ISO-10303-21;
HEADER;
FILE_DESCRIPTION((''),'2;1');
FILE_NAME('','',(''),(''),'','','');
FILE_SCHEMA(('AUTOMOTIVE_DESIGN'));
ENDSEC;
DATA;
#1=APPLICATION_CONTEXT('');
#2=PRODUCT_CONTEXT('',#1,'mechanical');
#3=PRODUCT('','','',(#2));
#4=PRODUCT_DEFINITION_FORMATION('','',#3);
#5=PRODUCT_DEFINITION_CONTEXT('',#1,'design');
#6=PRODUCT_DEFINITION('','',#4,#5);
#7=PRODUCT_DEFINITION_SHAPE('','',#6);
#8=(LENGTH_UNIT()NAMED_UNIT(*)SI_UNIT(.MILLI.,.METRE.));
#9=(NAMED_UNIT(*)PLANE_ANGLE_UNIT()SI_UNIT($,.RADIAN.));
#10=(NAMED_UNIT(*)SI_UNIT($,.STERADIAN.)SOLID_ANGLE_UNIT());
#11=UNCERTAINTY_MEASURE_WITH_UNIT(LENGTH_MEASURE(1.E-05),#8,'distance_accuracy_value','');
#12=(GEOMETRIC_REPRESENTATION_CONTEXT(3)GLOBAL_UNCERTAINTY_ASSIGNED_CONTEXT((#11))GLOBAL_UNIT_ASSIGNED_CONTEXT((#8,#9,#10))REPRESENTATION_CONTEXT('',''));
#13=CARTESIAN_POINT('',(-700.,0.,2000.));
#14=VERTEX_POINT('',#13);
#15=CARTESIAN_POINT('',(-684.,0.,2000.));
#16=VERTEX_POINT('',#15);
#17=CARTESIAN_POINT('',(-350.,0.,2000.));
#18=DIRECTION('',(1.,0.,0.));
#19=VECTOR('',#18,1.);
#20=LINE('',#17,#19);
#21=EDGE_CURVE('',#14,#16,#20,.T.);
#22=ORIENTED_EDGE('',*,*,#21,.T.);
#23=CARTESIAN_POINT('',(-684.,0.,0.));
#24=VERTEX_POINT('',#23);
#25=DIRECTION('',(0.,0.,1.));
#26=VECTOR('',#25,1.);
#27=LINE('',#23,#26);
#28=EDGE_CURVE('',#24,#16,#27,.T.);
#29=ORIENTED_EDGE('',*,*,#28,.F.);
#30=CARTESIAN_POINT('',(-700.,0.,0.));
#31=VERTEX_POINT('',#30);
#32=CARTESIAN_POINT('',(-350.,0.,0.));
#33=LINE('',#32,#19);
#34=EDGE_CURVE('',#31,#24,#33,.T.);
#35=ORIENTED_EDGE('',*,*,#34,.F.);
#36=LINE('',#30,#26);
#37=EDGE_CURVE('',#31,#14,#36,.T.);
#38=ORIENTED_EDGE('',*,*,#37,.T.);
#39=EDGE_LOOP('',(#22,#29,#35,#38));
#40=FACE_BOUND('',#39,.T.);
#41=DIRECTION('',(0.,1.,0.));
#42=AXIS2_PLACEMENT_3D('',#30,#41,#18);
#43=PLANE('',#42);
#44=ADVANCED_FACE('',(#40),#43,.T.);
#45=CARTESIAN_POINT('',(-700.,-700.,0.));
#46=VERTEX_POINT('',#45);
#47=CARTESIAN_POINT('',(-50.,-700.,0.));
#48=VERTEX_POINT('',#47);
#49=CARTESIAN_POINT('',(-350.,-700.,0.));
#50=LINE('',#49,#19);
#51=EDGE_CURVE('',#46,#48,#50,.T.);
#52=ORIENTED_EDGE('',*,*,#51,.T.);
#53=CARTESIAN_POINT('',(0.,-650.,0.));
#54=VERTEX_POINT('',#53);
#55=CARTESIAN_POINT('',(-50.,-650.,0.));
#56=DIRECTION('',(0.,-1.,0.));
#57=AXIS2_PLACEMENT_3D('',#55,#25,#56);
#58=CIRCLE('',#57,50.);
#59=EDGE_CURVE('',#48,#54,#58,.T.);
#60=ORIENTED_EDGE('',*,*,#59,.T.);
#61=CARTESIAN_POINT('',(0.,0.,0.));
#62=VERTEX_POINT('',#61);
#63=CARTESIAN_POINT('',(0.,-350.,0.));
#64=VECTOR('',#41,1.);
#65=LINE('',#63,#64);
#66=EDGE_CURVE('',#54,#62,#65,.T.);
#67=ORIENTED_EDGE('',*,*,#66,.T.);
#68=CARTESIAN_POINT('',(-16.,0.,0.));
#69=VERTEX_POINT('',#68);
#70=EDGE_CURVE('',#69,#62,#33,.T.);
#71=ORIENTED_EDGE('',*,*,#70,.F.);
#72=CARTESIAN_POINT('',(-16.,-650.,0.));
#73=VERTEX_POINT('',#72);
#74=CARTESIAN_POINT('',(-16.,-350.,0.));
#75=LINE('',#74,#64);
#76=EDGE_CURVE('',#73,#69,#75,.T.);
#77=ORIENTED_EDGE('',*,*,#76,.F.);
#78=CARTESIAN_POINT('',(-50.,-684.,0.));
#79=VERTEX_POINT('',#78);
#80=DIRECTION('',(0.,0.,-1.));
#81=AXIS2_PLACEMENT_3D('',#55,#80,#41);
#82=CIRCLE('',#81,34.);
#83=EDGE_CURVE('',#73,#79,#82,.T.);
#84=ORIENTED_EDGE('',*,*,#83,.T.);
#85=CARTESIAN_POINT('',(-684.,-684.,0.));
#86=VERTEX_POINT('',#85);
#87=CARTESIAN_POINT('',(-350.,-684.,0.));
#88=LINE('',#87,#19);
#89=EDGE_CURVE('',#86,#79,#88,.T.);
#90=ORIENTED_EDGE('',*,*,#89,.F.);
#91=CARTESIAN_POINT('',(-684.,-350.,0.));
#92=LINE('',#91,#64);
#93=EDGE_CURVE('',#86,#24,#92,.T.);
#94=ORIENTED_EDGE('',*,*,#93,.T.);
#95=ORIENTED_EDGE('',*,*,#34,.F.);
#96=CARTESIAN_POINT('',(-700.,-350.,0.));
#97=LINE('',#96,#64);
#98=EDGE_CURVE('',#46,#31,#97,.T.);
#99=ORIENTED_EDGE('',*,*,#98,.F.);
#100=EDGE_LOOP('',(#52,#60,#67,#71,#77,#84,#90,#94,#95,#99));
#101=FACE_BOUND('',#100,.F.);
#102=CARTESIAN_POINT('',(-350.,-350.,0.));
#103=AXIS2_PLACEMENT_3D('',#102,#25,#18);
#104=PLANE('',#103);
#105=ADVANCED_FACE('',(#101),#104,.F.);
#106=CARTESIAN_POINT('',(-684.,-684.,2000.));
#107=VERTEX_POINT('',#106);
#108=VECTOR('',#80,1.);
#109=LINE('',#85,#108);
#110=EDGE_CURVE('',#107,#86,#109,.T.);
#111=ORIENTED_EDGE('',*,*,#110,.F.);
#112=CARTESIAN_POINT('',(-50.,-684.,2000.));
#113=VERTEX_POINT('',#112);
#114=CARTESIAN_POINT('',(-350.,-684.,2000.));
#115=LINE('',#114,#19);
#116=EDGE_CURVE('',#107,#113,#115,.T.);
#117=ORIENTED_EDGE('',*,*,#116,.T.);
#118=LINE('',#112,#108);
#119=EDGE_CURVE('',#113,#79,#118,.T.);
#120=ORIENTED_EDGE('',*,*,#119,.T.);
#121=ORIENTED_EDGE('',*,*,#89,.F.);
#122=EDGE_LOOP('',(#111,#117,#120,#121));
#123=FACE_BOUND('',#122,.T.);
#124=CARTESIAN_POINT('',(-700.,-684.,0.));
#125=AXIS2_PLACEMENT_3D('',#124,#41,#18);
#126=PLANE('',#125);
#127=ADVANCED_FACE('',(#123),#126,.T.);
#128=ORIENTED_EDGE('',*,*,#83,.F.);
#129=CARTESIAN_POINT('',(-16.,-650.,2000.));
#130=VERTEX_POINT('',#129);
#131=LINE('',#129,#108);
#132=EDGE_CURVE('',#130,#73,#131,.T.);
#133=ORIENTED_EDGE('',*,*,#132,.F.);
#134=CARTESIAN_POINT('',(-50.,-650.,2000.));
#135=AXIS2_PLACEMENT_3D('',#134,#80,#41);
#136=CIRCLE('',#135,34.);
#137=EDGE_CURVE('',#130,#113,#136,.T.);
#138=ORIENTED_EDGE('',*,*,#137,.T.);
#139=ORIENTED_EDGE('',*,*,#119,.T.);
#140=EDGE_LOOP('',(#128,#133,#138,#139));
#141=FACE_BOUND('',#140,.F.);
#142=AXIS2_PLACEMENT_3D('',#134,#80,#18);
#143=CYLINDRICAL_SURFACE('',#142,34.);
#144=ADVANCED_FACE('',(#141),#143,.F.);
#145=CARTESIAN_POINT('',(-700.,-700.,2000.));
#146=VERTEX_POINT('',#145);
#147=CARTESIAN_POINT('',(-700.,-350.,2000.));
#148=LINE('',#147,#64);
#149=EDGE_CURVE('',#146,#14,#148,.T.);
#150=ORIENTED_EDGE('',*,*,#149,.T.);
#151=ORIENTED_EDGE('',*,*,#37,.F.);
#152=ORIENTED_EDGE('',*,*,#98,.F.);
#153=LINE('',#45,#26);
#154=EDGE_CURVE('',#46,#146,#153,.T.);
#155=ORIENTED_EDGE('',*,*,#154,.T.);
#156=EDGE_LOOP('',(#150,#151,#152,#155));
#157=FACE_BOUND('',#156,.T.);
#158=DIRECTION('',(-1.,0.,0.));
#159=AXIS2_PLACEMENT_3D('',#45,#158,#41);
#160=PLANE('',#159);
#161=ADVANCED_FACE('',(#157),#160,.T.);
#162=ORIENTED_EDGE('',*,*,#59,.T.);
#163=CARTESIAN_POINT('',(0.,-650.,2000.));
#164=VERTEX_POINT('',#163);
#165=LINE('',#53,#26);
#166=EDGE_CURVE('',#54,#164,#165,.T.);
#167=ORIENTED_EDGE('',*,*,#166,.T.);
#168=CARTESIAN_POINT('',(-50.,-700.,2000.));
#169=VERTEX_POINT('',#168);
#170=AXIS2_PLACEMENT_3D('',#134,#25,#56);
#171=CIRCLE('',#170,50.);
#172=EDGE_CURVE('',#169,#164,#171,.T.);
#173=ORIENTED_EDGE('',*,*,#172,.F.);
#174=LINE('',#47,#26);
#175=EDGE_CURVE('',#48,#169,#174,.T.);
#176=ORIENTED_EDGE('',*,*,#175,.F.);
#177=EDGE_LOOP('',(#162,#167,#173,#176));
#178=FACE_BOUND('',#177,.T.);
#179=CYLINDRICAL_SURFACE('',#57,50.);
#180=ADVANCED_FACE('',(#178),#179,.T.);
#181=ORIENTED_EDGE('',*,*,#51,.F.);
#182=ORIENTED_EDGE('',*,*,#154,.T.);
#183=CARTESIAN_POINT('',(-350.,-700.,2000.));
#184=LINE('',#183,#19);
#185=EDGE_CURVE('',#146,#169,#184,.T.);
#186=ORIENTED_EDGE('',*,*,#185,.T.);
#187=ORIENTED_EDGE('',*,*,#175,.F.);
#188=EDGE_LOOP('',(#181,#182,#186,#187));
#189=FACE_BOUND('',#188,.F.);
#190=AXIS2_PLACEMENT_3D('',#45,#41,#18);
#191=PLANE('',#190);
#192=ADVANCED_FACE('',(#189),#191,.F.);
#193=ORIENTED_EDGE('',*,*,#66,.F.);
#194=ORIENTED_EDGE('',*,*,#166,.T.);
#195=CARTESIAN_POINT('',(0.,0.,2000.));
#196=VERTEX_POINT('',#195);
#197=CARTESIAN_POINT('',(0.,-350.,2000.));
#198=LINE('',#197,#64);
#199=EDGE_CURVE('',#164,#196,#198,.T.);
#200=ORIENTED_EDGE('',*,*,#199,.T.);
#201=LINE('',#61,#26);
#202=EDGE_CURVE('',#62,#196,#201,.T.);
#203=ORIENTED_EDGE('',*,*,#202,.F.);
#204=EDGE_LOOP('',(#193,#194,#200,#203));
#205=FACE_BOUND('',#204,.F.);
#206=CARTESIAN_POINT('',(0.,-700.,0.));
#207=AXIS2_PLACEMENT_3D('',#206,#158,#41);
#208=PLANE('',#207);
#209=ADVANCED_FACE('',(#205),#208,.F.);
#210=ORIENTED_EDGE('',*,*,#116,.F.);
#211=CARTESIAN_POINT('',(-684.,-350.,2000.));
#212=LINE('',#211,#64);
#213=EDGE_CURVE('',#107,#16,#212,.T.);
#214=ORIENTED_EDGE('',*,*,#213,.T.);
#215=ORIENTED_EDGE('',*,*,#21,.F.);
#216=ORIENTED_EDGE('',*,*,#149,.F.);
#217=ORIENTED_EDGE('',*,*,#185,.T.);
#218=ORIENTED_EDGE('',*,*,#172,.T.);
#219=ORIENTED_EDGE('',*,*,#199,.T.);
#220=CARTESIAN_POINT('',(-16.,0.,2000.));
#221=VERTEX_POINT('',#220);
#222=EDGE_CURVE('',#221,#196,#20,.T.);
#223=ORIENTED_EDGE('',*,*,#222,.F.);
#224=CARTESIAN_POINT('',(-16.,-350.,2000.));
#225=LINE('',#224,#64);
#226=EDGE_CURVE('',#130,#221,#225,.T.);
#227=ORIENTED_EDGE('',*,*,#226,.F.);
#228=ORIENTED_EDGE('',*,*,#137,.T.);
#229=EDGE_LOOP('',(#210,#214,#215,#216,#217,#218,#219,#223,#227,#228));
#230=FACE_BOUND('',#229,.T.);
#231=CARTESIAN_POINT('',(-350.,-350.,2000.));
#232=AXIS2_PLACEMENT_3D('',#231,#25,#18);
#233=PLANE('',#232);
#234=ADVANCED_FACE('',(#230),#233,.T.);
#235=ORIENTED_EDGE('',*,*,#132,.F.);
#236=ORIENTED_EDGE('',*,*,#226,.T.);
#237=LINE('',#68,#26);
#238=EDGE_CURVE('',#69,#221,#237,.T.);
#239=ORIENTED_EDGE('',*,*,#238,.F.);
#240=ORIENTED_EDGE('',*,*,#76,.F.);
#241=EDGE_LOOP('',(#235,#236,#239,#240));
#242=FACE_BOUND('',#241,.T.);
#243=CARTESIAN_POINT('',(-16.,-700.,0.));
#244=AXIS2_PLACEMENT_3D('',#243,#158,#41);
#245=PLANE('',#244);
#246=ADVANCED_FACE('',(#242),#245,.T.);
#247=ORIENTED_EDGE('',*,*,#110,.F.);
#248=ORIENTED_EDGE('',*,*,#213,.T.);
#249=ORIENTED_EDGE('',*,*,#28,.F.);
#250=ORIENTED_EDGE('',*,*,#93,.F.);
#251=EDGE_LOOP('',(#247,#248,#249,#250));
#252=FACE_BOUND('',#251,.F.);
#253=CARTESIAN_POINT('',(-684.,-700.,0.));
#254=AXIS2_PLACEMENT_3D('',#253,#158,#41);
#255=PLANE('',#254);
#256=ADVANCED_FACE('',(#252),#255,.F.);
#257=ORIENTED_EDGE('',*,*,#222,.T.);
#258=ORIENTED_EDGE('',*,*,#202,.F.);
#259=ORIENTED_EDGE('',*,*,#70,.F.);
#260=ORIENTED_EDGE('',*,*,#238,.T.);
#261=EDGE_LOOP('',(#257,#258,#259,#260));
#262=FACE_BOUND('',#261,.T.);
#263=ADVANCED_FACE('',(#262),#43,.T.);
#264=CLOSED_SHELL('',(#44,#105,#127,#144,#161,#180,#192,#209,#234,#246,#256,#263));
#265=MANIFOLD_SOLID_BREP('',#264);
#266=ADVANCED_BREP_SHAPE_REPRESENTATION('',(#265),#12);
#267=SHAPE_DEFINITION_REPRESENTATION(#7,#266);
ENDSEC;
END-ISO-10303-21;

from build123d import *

# Parameters (mm, degrees)
F0_W     = 700
F0_H     = 700
F1_DEPTH = 2000
F2_T     = -16
F3_R     = 50
F4_R     = 34


# Not quite as in the source:
# - a feature names something its author has since deleted; it is built from what else it names


with BuildPart() as f1:
    # F0 (on Top) → F1 (new body)
    with BuildSketch(Plane.XY):
        with Locations((-350, -350)):
            Rectangle(F0_W, F0_H)
    extrude(amount=F1_DEPTH)

    # F2
    f2_openings = [f1.faces().sort_by_distance(p)[0] for p in [
        (-350, 0, 1000),
        (-350, -350, 2000),
        (-350, -350, 0),
    ]]
    offset(amount=F2_T, openings=f2_openings)

    # F3
    f3_edges = [f1.edges().sort_by_distance(p)[0] for p in [
        (0, -700, 1000),
    ]]
    fillet(f3_edges, radius=F3_R)

    # F4
    f4_edges = [f1.edges().sort_by_distance(p)[0] for p in [
        (-16, -684, 1000),
    ]]
    fillet(f4_edges, radius=F4_R)


solid = f1.part
